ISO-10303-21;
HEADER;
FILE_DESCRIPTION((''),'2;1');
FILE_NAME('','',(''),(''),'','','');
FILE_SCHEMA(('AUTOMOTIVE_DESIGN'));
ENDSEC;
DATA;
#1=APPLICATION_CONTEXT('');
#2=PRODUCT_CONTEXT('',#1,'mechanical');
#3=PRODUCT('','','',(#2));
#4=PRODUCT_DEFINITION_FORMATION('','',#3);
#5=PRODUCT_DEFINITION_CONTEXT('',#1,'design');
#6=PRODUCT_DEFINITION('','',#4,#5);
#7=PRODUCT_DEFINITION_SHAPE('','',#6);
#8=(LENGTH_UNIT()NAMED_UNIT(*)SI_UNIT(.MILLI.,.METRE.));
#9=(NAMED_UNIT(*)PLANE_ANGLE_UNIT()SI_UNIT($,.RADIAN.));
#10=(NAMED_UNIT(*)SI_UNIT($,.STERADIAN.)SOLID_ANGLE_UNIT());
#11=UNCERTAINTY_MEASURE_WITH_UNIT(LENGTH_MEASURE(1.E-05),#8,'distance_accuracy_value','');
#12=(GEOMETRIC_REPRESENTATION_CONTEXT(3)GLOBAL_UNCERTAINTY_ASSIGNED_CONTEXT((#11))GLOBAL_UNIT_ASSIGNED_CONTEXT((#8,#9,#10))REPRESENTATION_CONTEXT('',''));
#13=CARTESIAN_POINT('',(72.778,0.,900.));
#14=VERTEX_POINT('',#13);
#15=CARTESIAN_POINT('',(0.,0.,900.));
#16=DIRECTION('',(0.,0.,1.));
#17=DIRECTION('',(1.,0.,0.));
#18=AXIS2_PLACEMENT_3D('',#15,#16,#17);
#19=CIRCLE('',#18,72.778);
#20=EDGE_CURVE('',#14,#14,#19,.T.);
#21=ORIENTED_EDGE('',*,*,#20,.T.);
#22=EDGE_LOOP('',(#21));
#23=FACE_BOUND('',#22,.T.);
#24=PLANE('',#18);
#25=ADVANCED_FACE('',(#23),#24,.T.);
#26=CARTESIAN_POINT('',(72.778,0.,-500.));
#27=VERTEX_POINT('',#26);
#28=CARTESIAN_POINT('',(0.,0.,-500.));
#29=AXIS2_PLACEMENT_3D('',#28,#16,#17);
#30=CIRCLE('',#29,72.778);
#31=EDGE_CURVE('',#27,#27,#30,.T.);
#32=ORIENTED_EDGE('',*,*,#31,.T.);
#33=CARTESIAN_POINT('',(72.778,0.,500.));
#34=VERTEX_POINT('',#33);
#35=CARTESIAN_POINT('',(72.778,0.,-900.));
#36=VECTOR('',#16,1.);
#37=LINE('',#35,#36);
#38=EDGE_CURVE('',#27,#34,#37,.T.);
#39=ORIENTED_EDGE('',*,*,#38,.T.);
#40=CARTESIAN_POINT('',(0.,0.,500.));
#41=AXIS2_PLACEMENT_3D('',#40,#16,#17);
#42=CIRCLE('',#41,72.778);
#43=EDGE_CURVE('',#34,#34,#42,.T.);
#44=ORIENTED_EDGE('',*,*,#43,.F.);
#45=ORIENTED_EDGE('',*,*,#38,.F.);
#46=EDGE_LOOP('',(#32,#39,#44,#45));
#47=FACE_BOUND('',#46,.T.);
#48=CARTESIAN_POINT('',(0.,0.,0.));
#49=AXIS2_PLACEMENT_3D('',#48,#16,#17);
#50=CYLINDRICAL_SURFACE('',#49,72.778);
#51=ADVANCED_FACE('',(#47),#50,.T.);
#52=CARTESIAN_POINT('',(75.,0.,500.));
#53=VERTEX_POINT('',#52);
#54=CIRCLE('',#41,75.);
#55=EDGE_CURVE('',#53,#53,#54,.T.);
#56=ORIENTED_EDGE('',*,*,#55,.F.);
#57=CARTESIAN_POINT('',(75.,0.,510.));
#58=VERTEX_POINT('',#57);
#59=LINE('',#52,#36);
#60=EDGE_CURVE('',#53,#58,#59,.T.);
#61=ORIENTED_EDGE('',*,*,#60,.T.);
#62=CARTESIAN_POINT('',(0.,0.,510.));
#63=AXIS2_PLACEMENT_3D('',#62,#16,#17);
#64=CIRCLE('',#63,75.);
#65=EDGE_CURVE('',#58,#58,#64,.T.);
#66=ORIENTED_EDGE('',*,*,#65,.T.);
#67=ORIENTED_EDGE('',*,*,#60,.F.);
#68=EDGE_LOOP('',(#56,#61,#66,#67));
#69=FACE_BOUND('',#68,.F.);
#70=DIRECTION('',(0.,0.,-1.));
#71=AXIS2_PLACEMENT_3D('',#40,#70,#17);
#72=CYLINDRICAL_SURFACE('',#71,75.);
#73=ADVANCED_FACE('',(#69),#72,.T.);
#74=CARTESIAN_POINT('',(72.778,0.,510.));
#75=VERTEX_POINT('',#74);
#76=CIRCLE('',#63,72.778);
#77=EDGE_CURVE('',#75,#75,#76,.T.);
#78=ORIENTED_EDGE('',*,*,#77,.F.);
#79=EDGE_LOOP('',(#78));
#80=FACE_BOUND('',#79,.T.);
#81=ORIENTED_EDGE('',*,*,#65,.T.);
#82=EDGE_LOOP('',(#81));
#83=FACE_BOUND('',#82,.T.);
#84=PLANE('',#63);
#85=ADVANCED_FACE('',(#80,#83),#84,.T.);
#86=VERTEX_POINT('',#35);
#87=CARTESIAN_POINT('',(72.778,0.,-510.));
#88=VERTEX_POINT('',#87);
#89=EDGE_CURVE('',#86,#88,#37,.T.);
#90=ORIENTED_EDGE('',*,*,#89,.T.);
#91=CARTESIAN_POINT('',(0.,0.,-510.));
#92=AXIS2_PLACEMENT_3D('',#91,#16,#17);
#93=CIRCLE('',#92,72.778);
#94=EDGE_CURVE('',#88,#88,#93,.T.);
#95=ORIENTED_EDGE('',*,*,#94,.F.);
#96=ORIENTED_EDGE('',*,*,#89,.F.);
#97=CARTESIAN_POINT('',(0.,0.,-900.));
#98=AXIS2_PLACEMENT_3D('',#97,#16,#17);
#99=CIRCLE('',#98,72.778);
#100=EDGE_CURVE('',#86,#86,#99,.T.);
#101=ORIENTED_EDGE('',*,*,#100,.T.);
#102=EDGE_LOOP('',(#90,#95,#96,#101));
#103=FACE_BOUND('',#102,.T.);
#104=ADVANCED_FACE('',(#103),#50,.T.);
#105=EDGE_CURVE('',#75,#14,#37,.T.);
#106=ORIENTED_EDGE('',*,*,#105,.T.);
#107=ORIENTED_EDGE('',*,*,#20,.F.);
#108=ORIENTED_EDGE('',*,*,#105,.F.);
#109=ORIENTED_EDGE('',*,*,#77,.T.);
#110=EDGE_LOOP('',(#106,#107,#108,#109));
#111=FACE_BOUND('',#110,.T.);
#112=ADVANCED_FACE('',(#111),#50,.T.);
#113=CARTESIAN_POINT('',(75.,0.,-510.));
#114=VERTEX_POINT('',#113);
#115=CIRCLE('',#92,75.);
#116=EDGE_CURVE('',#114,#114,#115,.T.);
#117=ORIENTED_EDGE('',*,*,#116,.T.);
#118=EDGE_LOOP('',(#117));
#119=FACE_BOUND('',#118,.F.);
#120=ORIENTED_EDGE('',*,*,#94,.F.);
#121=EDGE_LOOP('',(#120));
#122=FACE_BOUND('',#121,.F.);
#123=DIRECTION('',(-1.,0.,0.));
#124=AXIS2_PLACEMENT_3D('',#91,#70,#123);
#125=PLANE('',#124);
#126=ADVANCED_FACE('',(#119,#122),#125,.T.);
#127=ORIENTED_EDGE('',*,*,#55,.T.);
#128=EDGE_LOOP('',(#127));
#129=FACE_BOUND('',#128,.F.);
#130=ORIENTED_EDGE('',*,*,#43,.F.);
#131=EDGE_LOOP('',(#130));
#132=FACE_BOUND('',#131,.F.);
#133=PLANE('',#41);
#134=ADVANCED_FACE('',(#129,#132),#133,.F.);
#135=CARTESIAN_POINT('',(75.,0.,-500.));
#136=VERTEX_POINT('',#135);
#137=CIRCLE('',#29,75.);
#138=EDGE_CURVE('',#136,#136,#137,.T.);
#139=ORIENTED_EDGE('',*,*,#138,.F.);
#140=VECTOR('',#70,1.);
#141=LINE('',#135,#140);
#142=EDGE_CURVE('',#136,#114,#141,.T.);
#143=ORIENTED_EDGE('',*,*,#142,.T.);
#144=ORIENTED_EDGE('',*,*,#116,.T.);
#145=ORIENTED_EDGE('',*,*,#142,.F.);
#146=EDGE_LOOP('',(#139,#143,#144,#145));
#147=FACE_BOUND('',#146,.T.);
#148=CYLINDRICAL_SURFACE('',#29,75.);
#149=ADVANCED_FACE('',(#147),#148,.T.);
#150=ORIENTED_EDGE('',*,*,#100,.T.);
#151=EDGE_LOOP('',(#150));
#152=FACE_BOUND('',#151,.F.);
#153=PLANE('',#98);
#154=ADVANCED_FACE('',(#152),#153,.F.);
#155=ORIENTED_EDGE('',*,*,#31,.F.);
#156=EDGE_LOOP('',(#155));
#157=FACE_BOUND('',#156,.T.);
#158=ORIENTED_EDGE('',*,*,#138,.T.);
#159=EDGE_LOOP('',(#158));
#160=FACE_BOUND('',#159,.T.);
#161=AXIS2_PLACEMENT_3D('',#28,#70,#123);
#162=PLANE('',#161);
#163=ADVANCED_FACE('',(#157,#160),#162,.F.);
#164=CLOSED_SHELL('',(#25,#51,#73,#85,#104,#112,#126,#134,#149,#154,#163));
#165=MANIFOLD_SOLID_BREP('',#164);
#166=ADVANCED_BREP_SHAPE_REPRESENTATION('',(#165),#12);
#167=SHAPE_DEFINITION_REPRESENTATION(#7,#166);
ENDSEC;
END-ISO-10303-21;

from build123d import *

# Parameters (mm, degrees)
F0_R          = 72.778
F1_DEPTH      = 900
F1_DEPTH_BACK = 900
F3_R          = 75
F3_R_2        = 72.778
F4_DEPTH      = 10


# Not quite as in the source:
# - a pattern or mirror of a feature is missing from the dataset's text; its kind, count and spacing are read off the source's solid


with BuildPart() as f1:
    # F0 (on Top) → F1 (new body, two sides)
    with BuildSketch(Plane.XY) as f1_sk:
        Circle(F0_R)
    extrude(amount=F1_DEPTH)
    extrude(f1_sk.sketch, amount=-F1_DEPTH_BACK)

    # F3 (on offset) → F4 (join)
    with BuildSketch(Plane.XY.offset(500)):
        Circle(F3_R)
        Circle(F3_R_2, mode=Mode.SUBTRACT)
    f4 = extrude(amount=F4_DEPTH)

    # F4_copies: F4 across plane
    add(f4.mirror(Plane(origin=(0, 0, 0), x_dir=(-1, 0, 0), z_dir=(0, 0, -1))))


solid = f1.part
